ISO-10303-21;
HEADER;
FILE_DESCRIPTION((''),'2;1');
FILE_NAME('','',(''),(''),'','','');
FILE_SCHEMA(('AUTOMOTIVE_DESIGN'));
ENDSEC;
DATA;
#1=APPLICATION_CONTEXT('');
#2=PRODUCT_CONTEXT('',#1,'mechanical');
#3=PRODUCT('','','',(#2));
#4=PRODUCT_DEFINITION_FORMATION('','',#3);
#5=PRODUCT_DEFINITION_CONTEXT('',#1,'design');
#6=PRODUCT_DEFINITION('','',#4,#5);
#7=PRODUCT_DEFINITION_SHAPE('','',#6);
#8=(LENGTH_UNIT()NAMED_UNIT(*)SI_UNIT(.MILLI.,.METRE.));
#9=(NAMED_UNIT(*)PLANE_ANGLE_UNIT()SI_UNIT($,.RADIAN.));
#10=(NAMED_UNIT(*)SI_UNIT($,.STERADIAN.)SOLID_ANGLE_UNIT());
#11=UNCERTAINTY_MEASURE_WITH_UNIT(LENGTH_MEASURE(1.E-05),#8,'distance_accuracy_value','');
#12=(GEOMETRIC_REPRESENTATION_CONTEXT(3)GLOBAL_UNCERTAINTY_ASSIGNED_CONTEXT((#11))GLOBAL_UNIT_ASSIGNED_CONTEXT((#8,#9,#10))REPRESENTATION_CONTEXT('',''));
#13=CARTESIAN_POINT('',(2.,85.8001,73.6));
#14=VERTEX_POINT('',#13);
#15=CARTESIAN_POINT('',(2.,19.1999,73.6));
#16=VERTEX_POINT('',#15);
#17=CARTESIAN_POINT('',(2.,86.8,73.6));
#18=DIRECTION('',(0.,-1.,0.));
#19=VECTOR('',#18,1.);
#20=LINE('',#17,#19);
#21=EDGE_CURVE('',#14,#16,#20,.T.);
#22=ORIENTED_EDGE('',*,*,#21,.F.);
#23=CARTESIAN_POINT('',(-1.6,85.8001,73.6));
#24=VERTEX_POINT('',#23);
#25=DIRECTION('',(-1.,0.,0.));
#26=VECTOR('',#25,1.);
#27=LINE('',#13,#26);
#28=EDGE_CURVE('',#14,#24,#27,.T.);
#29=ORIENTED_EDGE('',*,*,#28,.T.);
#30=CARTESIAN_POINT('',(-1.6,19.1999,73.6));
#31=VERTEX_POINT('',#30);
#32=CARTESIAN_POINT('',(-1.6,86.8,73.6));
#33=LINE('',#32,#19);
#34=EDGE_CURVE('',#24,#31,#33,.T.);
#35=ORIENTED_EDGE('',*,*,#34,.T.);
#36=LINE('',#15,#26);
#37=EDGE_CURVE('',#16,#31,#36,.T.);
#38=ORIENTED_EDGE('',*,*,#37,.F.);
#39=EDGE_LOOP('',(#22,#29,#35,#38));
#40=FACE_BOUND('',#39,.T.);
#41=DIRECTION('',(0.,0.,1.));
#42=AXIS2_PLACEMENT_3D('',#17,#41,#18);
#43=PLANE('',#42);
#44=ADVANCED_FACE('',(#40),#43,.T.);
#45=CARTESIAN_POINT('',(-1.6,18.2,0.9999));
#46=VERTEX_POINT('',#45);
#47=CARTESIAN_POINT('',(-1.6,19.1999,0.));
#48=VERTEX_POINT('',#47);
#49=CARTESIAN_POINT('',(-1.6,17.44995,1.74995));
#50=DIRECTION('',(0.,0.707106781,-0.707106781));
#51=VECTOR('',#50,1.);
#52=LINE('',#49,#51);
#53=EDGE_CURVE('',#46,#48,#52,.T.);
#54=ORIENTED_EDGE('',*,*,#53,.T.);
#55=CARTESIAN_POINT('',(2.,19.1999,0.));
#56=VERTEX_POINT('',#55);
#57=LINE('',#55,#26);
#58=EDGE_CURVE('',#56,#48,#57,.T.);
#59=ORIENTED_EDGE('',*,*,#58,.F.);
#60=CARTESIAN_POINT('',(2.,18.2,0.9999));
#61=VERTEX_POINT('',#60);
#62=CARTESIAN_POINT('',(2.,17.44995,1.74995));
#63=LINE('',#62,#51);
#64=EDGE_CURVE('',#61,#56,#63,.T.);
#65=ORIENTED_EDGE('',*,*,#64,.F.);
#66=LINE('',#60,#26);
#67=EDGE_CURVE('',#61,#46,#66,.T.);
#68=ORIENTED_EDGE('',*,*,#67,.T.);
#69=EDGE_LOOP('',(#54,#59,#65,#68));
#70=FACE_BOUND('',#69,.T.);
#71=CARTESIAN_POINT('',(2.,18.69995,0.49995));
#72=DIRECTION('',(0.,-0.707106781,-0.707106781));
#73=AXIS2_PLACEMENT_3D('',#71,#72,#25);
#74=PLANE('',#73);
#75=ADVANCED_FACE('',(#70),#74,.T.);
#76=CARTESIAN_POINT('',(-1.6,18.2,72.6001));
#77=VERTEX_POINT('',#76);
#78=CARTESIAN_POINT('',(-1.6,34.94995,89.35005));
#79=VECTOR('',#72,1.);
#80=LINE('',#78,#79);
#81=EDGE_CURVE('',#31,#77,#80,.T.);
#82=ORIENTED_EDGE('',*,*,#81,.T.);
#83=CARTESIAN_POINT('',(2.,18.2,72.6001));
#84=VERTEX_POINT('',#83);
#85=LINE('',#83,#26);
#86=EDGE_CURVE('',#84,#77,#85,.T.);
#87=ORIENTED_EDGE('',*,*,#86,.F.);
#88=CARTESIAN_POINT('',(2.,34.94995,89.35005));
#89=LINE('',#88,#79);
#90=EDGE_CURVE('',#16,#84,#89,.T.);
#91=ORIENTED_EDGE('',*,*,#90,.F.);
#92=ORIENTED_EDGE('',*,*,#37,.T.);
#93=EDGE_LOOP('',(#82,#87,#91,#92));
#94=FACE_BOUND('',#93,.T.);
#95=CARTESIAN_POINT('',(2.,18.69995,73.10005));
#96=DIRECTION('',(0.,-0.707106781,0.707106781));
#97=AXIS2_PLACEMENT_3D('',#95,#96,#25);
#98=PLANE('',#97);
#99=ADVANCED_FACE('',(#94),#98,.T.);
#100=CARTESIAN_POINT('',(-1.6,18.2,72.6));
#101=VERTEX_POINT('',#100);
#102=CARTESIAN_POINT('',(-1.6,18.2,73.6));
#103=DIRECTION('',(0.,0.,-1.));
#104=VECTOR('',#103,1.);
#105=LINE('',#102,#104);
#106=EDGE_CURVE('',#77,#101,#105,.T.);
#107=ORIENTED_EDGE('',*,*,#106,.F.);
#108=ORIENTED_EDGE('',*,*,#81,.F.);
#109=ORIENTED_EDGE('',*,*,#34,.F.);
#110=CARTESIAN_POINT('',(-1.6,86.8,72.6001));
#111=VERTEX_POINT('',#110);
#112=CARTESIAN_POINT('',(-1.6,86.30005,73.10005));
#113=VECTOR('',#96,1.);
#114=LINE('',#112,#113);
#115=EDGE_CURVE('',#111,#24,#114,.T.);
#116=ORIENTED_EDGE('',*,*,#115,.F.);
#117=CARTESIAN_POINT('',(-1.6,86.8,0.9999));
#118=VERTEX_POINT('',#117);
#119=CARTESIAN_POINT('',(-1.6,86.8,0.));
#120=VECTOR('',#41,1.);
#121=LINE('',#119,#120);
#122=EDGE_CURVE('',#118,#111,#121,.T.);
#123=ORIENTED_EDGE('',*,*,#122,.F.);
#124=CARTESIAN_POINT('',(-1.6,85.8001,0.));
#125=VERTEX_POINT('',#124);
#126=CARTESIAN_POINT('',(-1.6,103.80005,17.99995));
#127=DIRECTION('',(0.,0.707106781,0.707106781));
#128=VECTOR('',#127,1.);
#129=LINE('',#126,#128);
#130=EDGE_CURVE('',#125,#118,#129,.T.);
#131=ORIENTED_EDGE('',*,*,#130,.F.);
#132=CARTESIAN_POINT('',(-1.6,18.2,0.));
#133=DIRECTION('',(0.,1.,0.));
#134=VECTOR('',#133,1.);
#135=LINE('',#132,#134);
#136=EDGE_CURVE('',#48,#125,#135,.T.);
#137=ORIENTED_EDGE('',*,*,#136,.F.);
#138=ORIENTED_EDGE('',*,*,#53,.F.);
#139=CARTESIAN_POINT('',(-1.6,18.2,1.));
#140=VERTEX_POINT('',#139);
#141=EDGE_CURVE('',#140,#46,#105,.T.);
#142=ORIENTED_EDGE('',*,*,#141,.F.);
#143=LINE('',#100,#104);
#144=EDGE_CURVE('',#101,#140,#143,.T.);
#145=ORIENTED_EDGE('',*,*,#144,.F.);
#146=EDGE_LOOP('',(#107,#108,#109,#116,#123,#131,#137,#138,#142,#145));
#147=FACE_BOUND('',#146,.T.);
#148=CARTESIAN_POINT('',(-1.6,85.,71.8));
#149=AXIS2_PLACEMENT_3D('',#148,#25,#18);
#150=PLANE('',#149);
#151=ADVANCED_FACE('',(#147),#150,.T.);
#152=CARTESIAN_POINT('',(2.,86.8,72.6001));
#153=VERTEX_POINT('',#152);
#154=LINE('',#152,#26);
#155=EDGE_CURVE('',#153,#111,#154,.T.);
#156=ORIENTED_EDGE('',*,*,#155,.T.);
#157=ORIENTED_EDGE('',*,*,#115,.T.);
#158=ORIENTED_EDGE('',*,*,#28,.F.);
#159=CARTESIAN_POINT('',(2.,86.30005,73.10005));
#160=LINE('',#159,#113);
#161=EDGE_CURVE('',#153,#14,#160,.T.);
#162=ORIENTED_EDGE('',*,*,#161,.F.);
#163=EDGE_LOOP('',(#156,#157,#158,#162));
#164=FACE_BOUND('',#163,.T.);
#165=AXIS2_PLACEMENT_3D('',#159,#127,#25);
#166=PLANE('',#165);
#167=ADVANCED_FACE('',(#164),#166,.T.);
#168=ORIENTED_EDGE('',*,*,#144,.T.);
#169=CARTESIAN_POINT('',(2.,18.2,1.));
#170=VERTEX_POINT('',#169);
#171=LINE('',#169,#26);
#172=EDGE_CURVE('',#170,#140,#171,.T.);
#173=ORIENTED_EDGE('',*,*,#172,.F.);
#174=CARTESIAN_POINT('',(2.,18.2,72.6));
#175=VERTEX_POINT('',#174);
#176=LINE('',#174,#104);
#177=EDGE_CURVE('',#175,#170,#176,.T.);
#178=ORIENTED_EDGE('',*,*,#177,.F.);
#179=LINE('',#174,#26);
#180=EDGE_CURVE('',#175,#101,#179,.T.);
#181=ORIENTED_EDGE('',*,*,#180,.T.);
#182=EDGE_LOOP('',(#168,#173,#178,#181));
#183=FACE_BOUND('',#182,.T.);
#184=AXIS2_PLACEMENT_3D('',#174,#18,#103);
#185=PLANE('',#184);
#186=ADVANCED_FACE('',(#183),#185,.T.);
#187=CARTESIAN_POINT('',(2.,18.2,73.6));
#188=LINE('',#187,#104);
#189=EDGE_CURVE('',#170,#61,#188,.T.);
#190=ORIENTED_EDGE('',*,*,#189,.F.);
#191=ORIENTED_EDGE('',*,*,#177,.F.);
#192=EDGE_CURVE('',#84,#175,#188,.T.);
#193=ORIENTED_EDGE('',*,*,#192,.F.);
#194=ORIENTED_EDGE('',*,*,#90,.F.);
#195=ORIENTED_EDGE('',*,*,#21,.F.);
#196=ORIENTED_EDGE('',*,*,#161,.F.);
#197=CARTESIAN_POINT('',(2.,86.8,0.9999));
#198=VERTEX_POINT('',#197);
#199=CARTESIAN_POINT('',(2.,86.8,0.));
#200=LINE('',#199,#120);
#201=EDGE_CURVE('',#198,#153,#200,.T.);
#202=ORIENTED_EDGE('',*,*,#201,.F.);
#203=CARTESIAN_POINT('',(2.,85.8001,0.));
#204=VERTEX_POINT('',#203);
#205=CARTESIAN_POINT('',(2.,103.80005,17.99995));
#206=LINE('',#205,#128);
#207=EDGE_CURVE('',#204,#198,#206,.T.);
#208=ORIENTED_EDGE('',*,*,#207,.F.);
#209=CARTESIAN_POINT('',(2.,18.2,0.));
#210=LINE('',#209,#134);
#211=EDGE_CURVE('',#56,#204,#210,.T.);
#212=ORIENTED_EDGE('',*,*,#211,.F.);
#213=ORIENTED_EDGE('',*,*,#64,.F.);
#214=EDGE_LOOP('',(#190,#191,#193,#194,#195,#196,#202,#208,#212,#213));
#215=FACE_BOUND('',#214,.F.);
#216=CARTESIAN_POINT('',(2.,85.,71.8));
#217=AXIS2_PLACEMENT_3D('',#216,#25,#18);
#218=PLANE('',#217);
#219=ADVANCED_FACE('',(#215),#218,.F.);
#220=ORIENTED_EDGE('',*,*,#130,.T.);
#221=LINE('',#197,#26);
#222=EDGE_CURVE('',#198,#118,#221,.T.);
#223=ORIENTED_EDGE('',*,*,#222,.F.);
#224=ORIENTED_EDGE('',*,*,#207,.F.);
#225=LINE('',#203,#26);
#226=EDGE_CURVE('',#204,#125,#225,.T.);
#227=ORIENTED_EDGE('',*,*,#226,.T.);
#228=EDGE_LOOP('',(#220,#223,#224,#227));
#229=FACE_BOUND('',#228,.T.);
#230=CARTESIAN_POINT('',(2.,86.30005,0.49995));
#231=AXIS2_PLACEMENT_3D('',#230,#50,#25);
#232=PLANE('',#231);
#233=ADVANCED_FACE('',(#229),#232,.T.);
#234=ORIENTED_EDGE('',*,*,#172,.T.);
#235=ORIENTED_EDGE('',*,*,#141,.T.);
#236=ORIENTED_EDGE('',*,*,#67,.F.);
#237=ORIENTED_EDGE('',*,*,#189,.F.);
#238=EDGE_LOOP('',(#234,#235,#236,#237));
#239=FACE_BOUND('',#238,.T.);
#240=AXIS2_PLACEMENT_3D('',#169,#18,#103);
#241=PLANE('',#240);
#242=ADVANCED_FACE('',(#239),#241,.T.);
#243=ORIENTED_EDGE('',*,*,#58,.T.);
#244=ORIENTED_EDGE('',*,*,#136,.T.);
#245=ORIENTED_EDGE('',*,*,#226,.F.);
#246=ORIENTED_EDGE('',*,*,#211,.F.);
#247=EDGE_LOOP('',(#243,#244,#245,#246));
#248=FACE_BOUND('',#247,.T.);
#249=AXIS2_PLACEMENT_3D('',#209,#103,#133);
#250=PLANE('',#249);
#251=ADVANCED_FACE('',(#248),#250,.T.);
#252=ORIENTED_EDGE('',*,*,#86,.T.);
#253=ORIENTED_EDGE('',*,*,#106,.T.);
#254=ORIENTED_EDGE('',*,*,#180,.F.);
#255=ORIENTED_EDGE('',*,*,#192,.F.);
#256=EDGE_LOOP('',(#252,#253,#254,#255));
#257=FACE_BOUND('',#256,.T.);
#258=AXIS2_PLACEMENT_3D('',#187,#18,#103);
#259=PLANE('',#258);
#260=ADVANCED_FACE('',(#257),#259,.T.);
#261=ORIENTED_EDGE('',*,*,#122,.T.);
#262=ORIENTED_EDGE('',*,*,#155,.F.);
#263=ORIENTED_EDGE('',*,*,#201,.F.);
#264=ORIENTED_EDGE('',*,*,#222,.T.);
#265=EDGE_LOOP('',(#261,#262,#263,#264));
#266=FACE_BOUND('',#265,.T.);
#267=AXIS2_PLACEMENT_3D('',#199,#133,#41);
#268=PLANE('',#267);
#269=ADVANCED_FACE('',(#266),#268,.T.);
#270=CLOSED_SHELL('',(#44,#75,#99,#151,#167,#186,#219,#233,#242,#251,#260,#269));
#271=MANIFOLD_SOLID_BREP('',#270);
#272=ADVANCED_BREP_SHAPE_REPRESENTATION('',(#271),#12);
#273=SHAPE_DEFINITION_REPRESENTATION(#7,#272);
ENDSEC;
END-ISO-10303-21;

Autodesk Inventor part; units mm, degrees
ref_plane "YZ Plane" through (0, 0, 0) normal (1, 0, 0) x (0, 1, 0)
ref_plane "XZ Plane" through (0, 0, 0) normal (0, 1, 0) x (-1, 0, 0)
ref_plane "XY Plane" through (0, 0, 0) normal (0, 0, 1) x (1, 0, 0)
ref_plane "Work Plane1" through (2, 85, 71.8) normal (-1, 0, 0) x (0, -1, 0)
sketch "Sketch1" plane through (2, 85, 71.8) normal (-1, 0, 0) x (0, -1, 0)
  line L0 (66.8, 0.8) -> (66.8, -70.8) projected
  line L1 (-1.8, 1.8) -> (66.8, 1.8)
  line L2 (66.8, 1.8) -> (66.8, -71.8)
  line L3 (66.8, -71.8) -> (-1.8, -71.8)
  line L4 (-1.8, -71.8) -> (-1.8, 1.8)
  line L5 (67.8, -71.8) -> (170.8, -71.8) projected
  point P0 (85, -71.8)
  point P1 (66.8, 1.8)
  point P2 (66.8, 0.8)
extrude "Extrusion1" add sketch "Sketch1" along normal blind 3.6
chamfer "Chamfer1" distance 1 angle 45 4 edges at (0.2, 86.8, 73.6) (0.2, 18.2, 73.6) (0.2, 86.8, 0) (0.2, 18.2, 0)
equation "\"d0\" = wood_thickness"
equation "\"wood_thickness\" = 3.6"
properties part number "cover_wires"
